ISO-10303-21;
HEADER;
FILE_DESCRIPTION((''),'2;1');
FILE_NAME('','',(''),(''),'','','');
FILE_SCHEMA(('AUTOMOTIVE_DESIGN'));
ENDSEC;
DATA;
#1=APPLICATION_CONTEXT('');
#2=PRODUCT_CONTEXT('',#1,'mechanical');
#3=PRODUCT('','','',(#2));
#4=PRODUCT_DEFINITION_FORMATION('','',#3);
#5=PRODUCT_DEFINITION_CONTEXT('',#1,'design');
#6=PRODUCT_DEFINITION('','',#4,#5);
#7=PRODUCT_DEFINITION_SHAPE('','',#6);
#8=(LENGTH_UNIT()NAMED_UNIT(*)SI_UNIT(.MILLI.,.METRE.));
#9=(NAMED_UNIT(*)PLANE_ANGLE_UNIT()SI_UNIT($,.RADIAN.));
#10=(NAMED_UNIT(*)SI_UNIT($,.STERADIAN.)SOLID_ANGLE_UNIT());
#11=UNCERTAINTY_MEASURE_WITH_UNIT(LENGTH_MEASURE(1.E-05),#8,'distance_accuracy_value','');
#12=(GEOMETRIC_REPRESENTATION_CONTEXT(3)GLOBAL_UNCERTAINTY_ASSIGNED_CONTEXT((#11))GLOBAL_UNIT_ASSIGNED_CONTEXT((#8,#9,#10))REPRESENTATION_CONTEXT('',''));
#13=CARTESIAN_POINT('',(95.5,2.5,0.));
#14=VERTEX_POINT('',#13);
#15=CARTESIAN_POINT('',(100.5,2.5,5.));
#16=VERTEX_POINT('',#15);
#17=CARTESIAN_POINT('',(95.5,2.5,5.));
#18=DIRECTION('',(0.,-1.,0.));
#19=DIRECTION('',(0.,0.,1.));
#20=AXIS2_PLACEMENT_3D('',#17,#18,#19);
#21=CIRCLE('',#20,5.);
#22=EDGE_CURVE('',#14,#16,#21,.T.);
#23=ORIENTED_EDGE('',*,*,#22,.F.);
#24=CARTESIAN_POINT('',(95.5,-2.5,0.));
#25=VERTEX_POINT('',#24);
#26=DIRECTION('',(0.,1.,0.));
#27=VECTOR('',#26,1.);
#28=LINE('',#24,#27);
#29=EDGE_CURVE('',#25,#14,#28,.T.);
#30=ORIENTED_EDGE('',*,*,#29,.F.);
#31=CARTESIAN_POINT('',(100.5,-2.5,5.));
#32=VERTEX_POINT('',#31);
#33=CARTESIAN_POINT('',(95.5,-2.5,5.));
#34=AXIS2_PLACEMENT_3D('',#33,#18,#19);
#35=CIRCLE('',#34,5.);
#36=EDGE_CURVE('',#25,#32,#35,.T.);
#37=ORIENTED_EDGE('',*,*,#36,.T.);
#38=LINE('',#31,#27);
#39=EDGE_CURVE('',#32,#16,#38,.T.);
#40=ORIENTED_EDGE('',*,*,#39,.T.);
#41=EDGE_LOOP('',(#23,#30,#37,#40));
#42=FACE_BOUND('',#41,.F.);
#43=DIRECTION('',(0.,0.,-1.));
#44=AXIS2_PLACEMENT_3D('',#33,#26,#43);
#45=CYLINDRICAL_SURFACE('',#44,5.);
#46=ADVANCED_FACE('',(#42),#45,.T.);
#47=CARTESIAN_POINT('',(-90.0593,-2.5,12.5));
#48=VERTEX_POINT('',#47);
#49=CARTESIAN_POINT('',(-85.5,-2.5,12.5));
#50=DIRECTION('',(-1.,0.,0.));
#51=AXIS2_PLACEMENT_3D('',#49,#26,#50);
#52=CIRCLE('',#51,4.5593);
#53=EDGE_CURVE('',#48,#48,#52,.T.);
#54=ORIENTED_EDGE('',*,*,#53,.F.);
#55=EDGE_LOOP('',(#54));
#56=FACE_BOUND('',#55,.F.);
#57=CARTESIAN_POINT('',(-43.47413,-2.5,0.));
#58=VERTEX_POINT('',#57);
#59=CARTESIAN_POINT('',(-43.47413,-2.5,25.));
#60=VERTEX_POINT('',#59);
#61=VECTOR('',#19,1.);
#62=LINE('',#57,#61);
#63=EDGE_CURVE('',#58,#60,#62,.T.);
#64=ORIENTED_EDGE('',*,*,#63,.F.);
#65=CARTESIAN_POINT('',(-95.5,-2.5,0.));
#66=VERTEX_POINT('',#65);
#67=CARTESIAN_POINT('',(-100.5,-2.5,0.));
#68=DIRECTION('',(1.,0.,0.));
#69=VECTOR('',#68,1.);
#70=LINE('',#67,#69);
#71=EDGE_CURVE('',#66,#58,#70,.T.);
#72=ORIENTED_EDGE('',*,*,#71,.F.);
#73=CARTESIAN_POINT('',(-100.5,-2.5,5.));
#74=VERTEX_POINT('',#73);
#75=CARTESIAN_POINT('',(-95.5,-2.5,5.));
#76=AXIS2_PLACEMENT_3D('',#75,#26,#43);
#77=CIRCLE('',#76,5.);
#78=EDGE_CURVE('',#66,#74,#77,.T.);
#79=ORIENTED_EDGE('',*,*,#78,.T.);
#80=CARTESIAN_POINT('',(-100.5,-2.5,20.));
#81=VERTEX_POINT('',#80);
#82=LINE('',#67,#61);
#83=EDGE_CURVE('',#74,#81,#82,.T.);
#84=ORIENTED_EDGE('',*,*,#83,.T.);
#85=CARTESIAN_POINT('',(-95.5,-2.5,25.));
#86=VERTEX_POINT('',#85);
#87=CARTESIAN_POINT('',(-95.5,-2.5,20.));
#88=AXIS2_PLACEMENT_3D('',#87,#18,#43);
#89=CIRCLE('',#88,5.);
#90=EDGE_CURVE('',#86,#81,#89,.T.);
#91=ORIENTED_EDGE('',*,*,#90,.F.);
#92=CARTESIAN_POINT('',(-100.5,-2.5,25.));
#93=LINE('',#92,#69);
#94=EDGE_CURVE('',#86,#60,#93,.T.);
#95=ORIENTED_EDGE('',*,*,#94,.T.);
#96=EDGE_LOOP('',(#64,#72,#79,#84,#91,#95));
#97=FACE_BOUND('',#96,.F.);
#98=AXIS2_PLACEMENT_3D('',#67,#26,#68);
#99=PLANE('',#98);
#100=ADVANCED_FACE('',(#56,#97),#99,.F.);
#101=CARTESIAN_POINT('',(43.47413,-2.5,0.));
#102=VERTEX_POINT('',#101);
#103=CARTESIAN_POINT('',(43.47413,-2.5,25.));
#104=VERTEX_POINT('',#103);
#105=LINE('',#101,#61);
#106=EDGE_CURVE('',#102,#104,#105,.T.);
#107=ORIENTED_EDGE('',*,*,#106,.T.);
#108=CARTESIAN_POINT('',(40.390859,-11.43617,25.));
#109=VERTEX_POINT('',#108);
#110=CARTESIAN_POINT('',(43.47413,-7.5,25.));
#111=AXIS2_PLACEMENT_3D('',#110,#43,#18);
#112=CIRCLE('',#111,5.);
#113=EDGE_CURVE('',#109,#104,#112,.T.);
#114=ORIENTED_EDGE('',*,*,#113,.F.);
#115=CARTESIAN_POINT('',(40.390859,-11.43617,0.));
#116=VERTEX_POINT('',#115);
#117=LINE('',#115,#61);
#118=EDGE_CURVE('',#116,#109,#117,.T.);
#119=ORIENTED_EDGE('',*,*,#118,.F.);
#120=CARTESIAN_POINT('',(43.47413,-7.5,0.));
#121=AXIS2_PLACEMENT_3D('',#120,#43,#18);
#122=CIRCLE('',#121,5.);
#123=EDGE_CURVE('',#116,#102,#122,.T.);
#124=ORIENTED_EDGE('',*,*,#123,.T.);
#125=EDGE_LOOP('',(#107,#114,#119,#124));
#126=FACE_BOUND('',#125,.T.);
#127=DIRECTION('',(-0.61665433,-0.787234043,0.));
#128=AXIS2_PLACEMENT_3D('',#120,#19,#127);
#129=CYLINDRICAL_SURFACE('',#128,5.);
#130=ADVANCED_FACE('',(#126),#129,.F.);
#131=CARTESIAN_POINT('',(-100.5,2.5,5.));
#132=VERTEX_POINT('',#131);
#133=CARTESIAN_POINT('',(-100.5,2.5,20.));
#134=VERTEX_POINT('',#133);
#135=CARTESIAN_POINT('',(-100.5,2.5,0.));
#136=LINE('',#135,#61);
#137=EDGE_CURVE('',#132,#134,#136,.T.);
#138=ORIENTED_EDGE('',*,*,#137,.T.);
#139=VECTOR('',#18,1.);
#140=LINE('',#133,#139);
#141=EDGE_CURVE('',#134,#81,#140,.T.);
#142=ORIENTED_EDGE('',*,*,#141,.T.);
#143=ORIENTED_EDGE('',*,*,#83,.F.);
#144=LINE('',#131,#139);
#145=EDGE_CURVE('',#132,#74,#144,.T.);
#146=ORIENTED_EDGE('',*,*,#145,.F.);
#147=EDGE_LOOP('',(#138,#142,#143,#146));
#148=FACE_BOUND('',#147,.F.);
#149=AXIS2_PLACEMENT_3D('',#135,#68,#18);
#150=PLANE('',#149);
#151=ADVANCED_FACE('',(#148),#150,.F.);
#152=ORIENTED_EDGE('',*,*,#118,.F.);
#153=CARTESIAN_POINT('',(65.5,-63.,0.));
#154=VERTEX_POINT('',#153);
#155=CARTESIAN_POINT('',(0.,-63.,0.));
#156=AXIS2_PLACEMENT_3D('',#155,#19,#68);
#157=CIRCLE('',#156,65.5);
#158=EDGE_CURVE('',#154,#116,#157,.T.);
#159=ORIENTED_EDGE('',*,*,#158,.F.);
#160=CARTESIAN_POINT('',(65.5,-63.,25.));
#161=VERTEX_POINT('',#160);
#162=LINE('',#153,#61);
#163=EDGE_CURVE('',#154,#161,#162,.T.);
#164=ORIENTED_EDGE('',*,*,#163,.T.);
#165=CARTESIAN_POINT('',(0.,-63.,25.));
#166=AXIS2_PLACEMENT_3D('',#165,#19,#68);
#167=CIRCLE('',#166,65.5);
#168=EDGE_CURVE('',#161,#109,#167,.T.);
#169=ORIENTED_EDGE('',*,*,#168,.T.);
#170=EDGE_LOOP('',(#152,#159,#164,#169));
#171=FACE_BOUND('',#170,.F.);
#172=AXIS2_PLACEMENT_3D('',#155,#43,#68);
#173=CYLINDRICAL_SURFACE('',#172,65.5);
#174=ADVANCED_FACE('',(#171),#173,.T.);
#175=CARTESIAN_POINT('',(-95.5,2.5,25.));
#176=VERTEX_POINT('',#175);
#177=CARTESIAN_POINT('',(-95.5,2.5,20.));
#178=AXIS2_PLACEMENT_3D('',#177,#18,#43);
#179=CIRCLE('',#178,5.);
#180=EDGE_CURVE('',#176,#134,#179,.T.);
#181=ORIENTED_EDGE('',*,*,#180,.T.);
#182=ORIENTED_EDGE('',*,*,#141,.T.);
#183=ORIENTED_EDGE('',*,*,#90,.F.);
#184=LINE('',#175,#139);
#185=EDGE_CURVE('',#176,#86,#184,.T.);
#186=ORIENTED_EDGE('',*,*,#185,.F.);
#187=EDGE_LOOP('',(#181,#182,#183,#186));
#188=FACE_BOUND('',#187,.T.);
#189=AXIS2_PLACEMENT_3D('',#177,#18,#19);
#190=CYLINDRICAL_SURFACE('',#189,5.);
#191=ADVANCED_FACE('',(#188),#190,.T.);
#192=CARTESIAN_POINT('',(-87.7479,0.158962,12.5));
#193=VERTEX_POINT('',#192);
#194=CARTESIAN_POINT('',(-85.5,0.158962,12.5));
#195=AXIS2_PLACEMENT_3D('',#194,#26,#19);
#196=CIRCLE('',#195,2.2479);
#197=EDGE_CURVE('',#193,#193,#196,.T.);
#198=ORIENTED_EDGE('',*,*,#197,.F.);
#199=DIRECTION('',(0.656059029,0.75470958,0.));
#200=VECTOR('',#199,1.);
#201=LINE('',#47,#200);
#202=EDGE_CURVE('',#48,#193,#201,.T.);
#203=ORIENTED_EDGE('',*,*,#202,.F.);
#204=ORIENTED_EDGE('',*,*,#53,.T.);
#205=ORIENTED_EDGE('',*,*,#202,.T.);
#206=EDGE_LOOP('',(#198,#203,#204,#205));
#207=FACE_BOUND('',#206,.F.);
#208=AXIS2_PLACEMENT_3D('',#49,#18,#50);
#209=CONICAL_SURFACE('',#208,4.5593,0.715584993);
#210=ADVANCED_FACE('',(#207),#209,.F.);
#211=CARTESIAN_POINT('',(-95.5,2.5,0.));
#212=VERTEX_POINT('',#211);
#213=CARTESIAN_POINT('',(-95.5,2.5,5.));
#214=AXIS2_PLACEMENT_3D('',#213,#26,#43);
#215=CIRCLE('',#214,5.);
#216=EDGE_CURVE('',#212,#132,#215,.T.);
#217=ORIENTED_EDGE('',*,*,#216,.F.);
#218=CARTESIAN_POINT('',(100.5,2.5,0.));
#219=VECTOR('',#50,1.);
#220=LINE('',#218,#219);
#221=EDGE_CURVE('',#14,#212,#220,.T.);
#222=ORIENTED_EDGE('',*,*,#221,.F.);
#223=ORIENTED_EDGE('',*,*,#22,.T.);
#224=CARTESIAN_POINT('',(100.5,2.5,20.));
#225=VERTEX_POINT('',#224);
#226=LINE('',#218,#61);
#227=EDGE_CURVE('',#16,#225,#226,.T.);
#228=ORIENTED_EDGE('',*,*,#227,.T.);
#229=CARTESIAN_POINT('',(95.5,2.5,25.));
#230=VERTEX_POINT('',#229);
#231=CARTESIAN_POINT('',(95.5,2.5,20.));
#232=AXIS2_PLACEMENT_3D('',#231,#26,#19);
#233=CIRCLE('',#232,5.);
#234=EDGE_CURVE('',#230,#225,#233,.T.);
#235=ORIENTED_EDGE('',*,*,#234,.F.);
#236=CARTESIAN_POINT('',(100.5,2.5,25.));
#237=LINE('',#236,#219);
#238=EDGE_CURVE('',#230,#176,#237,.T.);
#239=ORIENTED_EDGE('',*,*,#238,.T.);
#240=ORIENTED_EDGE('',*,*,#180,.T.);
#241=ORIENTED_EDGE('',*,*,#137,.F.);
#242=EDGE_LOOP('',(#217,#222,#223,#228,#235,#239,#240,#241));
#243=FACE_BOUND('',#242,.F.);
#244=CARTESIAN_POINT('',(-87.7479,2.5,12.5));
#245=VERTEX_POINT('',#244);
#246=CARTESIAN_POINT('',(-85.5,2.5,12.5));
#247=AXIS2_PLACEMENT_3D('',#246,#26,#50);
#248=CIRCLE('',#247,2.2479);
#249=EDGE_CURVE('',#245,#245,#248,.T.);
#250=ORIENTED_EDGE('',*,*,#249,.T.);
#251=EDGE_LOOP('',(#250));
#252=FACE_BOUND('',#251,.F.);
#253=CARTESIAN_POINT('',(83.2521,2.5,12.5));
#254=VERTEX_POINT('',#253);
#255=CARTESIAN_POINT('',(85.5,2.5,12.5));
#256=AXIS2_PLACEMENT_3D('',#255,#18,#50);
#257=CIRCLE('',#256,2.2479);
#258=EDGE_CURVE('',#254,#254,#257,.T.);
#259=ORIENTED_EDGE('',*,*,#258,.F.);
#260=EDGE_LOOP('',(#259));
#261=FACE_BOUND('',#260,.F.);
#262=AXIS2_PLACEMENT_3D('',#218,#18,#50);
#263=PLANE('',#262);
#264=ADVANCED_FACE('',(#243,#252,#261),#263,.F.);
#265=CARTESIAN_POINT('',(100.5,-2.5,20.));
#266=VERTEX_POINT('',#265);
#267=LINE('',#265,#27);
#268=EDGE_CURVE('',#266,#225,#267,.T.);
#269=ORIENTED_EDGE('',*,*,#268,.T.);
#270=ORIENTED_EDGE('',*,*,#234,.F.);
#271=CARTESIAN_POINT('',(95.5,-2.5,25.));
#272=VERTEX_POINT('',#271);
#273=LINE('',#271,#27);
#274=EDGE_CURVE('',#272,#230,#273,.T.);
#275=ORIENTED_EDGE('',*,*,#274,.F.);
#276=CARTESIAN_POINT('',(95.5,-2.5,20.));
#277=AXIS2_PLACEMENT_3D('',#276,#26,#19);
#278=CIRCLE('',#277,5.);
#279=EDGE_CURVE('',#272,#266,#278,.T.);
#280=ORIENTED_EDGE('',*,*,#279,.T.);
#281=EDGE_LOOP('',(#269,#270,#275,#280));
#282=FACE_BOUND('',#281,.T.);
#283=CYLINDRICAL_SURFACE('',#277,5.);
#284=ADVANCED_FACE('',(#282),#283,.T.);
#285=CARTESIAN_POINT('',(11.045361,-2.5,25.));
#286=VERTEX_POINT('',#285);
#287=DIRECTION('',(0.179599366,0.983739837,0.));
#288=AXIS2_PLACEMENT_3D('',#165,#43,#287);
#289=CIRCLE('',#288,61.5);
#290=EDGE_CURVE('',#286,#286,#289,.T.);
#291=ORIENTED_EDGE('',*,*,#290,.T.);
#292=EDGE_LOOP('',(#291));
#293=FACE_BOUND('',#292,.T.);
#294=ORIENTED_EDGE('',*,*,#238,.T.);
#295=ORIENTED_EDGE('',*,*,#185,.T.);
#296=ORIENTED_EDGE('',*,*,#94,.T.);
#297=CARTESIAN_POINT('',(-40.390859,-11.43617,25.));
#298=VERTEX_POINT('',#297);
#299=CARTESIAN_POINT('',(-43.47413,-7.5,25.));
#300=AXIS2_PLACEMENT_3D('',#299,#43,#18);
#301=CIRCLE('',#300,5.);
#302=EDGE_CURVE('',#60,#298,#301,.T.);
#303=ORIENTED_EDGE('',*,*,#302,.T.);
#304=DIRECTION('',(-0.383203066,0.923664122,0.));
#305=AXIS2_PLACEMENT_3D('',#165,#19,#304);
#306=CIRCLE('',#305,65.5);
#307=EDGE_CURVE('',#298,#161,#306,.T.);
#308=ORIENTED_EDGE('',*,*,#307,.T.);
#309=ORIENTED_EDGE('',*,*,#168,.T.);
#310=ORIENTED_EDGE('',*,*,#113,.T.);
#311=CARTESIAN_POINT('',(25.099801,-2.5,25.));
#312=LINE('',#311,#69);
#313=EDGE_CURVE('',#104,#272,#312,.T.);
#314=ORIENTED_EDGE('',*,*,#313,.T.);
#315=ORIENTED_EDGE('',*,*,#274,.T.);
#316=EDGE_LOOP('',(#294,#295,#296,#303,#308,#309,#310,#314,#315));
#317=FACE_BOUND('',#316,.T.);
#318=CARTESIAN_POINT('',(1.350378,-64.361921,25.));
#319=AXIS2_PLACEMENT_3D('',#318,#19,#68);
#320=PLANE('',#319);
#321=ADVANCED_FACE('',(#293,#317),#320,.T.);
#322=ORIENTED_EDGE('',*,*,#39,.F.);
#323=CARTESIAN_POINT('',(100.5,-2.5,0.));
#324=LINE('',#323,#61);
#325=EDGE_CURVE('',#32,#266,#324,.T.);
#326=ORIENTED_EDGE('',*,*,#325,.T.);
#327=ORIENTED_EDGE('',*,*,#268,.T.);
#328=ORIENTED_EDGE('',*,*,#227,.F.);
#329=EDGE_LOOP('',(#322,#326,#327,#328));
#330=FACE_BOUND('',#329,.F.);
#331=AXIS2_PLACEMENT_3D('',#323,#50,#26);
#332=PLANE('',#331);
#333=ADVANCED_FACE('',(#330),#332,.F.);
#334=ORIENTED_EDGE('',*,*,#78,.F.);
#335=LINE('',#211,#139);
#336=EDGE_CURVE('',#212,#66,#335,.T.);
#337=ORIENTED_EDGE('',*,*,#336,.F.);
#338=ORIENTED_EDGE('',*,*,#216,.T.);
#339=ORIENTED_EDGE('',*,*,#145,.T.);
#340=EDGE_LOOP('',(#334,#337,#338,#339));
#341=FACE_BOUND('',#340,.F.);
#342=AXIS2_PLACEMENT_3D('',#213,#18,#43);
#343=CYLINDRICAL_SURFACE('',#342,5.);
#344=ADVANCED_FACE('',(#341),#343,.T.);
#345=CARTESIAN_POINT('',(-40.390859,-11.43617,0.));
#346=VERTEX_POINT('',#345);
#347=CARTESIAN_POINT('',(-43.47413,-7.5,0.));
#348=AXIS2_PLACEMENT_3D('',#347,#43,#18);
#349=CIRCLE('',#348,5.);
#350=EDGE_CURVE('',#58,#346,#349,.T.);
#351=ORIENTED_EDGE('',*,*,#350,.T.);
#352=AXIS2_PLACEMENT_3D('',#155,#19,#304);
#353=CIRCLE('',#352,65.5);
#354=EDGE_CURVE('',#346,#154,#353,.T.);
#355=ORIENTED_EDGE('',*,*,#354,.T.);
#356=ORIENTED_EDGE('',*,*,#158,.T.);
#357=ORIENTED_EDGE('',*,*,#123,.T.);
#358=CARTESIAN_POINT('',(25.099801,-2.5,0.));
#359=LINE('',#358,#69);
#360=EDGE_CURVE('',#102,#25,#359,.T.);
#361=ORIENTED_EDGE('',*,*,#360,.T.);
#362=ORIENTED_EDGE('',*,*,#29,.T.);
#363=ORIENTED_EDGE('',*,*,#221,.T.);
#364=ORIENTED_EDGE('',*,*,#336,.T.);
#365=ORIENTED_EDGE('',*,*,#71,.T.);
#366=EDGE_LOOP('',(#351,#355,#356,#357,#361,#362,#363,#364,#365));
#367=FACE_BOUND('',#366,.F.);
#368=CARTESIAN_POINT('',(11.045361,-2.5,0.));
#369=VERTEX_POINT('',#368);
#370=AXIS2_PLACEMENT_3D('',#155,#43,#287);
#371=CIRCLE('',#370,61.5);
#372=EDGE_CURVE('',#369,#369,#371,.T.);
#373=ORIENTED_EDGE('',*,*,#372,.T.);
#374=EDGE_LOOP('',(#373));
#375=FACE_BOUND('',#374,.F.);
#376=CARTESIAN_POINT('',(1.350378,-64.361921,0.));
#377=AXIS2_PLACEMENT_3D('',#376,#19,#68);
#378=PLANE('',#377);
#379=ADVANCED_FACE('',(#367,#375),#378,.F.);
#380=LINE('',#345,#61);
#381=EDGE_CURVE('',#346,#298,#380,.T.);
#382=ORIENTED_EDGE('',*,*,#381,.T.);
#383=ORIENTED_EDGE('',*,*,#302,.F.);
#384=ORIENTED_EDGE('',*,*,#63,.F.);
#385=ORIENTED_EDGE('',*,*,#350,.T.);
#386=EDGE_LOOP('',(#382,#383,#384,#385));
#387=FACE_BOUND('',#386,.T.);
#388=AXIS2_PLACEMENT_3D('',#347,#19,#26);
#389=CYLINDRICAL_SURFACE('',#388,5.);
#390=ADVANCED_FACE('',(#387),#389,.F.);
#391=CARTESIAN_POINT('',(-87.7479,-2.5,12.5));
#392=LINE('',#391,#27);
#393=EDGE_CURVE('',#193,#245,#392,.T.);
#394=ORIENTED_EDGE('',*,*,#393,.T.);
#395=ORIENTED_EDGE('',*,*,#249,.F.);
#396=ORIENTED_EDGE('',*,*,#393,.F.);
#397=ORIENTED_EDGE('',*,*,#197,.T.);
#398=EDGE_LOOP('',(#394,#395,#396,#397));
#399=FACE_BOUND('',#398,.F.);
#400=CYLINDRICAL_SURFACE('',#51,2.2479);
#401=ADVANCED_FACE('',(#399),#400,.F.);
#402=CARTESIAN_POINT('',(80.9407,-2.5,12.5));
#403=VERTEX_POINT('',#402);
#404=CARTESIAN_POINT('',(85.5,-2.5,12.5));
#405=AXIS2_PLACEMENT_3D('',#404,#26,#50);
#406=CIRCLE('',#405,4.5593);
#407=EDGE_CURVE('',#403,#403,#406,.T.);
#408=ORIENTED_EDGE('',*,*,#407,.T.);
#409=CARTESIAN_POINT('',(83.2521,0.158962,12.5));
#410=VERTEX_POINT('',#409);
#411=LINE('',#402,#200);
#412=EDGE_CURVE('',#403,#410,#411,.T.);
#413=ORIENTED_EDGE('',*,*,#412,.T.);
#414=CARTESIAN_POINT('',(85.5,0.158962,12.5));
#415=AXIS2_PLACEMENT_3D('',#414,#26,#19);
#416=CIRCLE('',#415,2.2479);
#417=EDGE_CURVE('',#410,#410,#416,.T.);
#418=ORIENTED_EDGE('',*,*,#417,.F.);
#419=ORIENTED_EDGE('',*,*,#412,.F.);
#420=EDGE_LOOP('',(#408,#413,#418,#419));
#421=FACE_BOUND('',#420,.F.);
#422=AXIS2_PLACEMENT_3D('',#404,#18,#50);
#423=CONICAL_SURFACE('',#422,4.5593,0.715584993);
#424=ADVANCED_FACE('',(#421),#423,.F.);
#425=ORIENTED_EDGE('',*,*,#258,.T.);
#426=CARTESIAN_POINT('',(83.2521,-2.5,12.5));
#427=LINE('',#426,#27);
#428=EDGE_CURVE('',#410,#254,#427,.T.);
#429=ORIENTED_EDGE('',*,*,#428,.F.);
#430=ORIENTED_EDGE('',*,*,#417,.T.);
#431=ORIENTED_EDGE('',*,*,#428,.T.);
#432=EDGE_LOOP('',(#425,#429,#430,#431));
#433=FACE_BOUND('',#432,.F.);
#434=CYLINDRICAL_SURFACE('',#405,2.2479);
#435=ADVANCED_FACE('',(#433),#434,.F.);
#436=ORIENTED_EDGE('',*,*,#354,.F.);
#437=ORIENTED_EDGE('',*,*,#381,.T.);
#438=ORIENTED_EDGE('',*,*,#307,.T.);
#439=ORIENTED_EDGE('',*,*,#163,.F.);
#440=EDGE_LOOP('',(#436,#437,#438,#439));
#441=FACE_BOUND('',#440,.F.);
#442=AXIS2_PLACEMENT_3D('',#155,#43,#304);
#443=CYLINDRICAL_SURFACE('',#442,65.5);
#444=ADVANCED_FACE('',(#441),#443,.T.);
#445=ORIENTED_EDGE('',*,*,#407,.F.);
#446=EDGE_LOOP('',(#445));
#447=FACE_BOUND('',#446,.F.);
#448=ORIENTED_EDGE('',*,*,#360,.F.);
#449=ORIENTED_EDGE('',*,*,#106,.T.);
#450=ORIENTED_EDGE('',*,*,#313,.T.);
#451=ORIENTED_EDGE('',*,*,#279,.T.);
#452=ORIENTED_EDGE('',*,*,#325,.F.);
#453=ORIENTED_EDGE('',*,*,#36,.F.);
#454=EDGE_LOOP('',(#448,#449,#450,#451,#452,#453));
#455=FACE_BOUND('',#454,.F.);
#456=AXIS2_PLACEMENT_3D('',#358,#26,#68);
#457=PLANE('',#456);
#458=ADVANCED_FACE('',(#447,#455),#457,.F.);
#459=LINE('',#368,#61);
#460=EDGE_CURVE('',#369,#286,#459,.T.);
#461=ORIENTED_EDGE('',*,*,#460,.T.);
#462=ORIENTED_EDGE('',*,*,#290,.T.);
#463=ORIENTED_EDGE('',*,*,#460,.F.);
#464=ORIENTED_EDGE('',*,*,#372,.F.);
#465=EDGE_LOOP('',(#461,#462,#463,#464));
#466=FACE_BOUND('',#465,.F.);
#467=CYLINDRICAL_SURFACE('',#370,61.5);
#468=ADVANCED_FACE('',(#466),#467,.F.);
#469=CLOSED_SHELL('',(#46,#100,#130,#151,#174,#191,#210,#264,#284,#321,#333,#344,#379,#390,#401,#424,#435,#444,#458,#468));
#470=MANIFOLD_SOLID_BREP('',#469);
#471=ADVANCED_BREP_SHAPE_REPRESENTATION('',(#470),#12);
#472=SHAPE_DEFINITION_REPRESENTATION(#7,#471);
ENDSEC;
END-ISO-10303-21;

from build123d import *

# Parameters (mm, degrees)
F1_DEPTH       = 25
F2_R           = 5
F3_R           = 5
F5_D           = 4.4958
F5_DEPTH       = 5
F5_CSINK_D     = 9.1186
F5_CSINK_ANGLE = 82
F5_TIP         = 1.3506745855


with BuildPart() as f1:
    # F0 (on Top) → F1 (new body)
    with BuildSketch(Plane.XY):
        with BuildLine():
            ThreePointArc((65.5, -63), (54.4714923246, -26.6254687462), (25.099800796, -2.5))
            Line((25.099800796, -2.5), (11.0453610172, -2.5))
            ThreePointArc((11.0453610172, -2.5), (47.2310263627, -23.6111672079), (61.5, -63))
            ThreePointArc((61.5, -63), (-39.3888327921, -110.2310263627), (-11.0453610172, -2.5))
            Line((-11.0453610172, -2.5), (-25.099800796, -2.5))
            ThreePointArc((-25.099800796, -2.5), (-36.3745312538, -117.4714923246), (65.5, -63))
        make_face()
        with BuildLine():
            Line((0, 2.5), (-100.5, 2.5))
            Line((-100.5, 2.5), (-100.5, -2.5))
            Line((-100.5, -2.5), (-25.099800796, -2.5))
            ThreePointArc((-25.099800796, -2.5), (-12.7964838921, 1.2378393161), (0, 2.5))
        make_face()
        with BuildLine():
            ThreePointArc((25.099800796, -2.5), (12.7964838921, 1.2378393161), (0, 2.5))
            ThreePointArc((0, 2.5), (-12.7964838921, 1.2378393161), (-25.099800796, -2.5))
            Line((-25.099800796, -2.5), (-11.0453610172, -2.5))
            ThreePointArc((-11.0453610172, -2.5), (0, -1.5), (11.0453610172, -2.5))
            Line((11.0453610172, -2.5), (25.099800796, -2.5))
        make_face()
        with BuildLine():
            Line((100.5, 2.5), (0, 2.5))
            ThreePointArc((0, 2.5), (12.7964838921, 1.2378393161), (25.099800796, -2.5))
            Line((25.099800796, -2.5), (100.5, -2.5))
            Line((100.5, -2.5), (100.5, 2.5))
        make_face()
    extrude(amount=F1_DEPTH)

    # F2
    f2_edges = [f1.edges().sort_by_distance(p)[0] for p in [
        (-25.099801, -2.5, 12.5),
        (25.099801, -2.5, 12.5),
    ]]
    fillet(f2_edges, radius=F2_R)

    # F3
    f3_edges = [f1.edges().sort_by_distance(p)[0] for p in [
        (-100.5, 0, 25),
        (-100.5, 0, 0),
        (100.5, 0, 25),
        (100.5, 0, 0),
    ]]
    fillet(f3_edges, radius=F3_R)

    # F5
    with Locations(Plane.XZ.offset(2.5)):
        with Locations((-85.5, 12.5), (85.5, 12.5)):
            CounterSinkHole(F5_D / 2, F5_CSINK_D / 2, depth=F5_DEPTH, counter_sink_angle=F5_CSINK_ANGLE)
            with Locations((0, 0, -(F5_DEPTH + F5_TIP / 2))):  # 118° drill point
                Cone(0, F5_D / 2, F5_TIP, mode=Mode.SUBTRACT)


solid = f1.part
